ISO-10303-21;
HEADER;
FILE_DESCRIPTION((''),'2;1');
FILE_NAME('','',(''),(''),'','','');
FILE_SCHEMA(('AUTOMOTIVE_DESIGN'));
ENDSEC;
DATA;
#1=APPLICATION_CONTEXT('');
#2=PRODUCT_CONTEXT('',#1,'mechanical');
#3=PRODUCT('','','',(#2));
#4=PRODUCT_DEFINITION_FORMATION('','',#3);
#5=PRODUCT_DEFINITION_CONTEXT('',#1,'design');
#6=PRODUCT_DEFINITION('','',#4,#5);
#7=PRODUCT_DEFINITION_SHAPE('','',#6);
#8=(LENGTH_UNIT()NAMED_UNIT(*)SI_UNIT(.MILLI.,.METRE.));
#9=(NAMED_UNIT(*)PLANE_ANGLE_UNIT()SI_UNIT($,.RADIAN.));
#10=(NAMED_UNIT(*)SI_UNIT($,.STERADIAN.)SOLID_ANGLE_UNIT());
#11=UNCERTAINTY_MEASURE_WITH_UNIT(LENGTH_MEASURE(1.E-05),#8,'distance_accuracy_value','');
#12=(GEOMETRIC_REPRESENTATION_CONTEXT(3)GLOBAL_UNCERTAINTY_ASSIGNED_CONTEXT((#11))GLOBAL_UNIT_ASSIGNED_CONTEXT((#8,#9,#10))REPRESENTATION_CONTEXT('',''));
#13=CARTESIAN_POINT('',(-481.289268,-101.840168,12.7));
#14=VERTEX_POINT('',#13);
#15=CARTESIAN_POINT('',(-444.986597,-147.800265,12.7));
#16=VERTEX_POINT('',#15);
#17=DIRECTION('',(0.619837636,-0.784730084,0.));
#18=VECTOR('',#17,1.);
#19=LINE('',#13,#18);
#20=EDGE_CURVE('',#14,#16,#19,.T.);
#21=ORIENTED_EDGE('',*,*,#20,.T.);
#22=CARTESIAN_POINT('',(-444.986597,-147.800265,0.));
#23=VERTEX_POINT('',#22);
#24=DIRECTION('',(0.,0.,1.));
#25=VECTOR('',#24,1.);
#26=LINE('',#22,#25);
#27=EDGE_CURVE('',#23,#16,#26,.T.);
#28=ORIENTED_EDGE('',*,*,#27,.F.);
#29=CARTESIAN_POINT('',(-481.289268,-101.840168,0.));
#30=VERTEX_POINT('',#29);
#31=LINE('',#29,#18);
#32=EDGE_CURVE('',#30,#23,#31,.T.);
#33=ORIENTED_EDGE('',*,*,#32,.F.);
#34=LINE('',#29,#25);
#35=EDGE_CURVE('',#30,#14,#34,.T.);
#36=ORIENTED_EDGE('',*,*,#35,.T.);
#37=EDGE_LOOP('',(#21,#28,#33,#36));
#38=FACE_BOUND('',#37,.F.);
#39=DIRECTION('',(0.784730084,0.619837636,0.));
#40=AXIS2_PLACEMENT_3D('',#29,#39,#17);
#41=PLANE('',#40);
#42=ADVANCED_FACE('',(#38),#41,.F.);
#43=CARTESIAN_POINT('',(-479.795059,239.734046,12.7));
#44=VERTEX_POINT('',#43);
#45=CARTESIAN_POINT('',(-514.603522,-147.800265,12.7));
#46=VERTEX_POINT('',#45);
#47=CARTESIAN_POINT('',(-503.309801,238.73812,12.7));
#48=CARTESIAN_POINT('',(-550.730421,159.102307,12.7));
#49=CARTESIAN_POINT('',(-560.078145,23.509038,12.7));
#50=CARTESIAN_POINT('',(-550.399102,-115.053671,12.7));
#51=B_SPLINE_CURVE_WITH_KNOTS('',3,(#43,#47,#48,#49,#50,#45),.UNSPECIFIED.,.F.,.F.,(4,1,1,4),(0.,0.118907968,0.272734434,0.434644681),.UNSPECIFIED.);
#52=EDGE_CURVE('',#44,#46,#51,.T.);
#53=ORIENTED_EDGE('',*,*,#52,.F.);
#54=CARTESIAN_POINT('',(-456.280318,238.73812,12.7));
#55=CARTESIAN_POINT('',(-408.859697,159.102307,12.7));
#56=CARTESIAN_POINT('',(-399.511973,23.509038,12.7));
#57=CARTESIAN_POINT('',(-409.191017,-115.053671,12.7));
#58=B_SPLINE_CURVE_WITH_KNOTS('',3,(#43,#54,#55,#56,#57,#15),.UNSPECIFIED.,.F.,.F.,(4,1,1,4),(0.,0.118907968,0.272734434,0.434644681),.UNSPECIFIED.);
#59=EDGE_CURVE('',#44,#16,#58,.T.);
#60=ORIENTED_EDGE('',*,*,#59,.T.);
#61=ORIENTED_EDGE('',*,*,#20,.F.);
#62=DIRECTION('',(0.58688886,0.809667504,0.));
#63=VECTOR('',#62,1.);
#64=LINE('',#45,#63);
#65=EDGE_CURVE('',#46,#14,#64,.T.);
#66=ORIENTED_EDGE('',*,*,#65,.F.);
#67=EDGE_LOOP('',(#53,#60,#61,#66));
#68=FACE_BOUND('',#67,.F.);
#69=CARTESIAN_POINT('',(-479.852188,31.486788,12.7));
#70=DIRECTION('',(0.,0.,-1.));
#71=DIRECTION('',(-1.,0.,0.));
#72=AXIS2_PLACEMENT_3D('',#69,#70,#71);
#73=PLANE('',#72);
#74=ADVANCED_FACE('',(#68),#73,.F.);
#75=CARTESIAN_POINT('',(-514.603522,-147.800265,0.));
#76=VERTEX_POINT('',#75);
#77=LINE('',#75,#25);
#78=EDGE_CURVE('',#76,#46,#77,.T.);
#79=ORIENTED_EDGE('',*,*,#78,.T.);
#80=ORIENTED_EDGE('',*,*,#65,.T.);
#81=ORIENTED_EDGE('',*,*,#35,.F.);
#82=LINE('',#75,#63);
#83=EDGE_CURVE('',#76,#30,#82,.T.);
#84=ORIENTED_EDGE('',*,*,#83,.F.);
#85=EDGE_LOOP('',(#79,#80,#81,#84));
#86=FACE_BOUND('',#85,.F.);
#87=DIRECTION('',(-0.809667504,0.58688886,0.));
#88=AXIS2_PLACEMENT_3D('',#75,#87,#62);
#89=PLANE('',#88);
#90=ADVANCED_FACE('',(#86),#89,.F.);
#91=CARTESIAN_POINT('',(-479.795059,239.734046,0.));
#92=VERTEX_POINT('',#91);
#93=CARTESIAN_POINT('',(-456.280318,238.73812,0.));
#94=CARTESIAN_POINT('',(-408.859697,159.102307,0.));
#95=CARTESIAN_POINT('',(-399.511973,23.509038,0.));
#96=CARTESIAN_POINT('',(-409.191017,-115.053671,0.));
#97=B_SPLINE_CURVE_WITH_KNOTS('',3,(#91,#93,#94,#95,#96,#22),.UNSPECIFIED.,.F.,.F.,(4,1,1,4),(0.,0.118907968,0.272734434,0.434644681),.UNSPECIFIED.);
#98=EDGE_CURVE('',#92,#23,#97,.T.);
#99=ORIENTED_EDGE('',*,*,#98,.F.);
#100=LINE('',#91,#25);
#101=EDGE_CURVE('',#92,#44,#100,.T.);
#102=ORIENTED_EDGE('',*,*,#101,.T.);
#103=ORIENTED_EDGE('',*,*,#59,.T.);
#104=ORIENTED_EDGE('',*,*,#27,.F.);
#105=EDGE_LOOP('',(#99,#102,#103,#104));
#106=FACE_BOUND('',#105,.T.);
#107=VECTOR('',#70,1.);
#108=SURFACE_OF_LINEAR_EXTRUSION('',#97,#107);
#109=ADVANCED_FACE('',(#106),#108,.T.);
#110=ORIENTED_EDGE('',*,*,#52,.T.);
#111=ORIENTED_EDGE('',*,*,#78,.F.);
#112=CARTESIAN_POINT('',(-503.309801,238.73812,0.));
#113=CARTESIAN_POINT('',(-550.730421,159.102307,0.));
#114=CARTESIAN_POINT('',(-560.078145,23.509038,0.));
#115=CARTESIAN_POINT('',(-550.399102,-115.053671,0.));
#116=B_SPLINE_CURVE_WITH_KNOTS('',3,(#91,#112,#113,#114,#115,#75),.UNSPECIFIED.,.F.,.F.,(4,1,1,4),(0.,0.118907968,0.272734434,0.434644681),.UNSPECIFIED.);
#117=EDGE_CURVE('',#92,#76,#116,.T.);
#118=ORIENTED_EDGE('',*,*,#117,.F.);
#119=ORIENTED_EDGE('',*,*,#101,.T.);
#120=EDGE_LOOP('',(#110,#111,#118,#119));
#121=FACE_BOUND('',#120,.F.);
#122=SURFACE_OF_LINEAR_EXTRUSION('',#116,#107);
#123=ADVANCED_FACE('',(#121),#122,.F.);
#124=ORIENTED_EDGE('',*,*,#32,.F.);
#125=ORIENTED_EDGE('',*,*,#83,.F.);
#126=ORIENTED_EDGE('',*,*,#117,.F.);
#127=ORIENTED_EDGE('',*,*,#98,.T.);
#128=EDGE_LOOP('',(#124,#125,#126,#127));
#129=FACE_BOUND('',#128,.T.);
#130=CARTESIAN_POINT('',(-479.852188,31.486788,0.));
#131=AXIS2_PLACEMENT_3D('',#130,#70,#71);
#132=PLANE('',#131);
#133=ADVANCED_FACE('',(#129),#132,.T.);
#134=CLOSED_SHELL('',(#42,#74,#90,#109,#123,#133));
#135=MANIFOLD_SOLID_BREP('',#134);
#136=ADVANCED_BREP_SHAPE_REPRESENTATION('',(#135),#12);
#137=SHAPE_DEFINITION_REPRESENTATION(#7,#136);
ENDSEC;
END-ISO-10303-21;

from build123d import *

# Parameters (mm, degrees)
F1_DEPTH = 12.7


with BuildPart() as f1:
    # F0 (on Top) → F1 (new body)
    with BuildSketch(Plane.XY):
        with BuildLine():
            add(Edge.make_bspline(
                [(-479.7950591739, 239.7340460338), (-456.2803178135, 238.7381201493), (-408.8596973192, 159.102307152), (-399.5119730208, 23.5090383581), (-409.1910165745, -115.0536707693), (-444.9865966458, -147.8002653918)],
                knots=[0, 0, 0, 0, 0.1189079678, 0.2727344342, 0.4346446811, 0.4346446811, 0.4346446811, 0.4346446811], degree=3))
            add(Edge.make_bspline(
                [(-479.795059174, 239.7340460338), (-503.3098005344, 238.7381201493), (-550.7304210286, 159.102307152), (-560.0781453271, 23.5090383581), (-550.3991017734, -115.0536707693), (-514.603521702, -147.8002653918)],
                knots=[0, 0, 0, 0, 0.1189079678, 0.2727344342, 0.4346446811, 0.4346446811, 0.4346446811, 0.4346446811], degree=3))
            Line((-514.603521702, -147.8002653918), (-481.2892675399, -101.8401682377))
            Line((-481.2892675399, -101.8401682377), (-444.9865966458, -147.8002653918))
        make_face()
    extrude(amount=F1_DEPTH)


solid = f1.part
